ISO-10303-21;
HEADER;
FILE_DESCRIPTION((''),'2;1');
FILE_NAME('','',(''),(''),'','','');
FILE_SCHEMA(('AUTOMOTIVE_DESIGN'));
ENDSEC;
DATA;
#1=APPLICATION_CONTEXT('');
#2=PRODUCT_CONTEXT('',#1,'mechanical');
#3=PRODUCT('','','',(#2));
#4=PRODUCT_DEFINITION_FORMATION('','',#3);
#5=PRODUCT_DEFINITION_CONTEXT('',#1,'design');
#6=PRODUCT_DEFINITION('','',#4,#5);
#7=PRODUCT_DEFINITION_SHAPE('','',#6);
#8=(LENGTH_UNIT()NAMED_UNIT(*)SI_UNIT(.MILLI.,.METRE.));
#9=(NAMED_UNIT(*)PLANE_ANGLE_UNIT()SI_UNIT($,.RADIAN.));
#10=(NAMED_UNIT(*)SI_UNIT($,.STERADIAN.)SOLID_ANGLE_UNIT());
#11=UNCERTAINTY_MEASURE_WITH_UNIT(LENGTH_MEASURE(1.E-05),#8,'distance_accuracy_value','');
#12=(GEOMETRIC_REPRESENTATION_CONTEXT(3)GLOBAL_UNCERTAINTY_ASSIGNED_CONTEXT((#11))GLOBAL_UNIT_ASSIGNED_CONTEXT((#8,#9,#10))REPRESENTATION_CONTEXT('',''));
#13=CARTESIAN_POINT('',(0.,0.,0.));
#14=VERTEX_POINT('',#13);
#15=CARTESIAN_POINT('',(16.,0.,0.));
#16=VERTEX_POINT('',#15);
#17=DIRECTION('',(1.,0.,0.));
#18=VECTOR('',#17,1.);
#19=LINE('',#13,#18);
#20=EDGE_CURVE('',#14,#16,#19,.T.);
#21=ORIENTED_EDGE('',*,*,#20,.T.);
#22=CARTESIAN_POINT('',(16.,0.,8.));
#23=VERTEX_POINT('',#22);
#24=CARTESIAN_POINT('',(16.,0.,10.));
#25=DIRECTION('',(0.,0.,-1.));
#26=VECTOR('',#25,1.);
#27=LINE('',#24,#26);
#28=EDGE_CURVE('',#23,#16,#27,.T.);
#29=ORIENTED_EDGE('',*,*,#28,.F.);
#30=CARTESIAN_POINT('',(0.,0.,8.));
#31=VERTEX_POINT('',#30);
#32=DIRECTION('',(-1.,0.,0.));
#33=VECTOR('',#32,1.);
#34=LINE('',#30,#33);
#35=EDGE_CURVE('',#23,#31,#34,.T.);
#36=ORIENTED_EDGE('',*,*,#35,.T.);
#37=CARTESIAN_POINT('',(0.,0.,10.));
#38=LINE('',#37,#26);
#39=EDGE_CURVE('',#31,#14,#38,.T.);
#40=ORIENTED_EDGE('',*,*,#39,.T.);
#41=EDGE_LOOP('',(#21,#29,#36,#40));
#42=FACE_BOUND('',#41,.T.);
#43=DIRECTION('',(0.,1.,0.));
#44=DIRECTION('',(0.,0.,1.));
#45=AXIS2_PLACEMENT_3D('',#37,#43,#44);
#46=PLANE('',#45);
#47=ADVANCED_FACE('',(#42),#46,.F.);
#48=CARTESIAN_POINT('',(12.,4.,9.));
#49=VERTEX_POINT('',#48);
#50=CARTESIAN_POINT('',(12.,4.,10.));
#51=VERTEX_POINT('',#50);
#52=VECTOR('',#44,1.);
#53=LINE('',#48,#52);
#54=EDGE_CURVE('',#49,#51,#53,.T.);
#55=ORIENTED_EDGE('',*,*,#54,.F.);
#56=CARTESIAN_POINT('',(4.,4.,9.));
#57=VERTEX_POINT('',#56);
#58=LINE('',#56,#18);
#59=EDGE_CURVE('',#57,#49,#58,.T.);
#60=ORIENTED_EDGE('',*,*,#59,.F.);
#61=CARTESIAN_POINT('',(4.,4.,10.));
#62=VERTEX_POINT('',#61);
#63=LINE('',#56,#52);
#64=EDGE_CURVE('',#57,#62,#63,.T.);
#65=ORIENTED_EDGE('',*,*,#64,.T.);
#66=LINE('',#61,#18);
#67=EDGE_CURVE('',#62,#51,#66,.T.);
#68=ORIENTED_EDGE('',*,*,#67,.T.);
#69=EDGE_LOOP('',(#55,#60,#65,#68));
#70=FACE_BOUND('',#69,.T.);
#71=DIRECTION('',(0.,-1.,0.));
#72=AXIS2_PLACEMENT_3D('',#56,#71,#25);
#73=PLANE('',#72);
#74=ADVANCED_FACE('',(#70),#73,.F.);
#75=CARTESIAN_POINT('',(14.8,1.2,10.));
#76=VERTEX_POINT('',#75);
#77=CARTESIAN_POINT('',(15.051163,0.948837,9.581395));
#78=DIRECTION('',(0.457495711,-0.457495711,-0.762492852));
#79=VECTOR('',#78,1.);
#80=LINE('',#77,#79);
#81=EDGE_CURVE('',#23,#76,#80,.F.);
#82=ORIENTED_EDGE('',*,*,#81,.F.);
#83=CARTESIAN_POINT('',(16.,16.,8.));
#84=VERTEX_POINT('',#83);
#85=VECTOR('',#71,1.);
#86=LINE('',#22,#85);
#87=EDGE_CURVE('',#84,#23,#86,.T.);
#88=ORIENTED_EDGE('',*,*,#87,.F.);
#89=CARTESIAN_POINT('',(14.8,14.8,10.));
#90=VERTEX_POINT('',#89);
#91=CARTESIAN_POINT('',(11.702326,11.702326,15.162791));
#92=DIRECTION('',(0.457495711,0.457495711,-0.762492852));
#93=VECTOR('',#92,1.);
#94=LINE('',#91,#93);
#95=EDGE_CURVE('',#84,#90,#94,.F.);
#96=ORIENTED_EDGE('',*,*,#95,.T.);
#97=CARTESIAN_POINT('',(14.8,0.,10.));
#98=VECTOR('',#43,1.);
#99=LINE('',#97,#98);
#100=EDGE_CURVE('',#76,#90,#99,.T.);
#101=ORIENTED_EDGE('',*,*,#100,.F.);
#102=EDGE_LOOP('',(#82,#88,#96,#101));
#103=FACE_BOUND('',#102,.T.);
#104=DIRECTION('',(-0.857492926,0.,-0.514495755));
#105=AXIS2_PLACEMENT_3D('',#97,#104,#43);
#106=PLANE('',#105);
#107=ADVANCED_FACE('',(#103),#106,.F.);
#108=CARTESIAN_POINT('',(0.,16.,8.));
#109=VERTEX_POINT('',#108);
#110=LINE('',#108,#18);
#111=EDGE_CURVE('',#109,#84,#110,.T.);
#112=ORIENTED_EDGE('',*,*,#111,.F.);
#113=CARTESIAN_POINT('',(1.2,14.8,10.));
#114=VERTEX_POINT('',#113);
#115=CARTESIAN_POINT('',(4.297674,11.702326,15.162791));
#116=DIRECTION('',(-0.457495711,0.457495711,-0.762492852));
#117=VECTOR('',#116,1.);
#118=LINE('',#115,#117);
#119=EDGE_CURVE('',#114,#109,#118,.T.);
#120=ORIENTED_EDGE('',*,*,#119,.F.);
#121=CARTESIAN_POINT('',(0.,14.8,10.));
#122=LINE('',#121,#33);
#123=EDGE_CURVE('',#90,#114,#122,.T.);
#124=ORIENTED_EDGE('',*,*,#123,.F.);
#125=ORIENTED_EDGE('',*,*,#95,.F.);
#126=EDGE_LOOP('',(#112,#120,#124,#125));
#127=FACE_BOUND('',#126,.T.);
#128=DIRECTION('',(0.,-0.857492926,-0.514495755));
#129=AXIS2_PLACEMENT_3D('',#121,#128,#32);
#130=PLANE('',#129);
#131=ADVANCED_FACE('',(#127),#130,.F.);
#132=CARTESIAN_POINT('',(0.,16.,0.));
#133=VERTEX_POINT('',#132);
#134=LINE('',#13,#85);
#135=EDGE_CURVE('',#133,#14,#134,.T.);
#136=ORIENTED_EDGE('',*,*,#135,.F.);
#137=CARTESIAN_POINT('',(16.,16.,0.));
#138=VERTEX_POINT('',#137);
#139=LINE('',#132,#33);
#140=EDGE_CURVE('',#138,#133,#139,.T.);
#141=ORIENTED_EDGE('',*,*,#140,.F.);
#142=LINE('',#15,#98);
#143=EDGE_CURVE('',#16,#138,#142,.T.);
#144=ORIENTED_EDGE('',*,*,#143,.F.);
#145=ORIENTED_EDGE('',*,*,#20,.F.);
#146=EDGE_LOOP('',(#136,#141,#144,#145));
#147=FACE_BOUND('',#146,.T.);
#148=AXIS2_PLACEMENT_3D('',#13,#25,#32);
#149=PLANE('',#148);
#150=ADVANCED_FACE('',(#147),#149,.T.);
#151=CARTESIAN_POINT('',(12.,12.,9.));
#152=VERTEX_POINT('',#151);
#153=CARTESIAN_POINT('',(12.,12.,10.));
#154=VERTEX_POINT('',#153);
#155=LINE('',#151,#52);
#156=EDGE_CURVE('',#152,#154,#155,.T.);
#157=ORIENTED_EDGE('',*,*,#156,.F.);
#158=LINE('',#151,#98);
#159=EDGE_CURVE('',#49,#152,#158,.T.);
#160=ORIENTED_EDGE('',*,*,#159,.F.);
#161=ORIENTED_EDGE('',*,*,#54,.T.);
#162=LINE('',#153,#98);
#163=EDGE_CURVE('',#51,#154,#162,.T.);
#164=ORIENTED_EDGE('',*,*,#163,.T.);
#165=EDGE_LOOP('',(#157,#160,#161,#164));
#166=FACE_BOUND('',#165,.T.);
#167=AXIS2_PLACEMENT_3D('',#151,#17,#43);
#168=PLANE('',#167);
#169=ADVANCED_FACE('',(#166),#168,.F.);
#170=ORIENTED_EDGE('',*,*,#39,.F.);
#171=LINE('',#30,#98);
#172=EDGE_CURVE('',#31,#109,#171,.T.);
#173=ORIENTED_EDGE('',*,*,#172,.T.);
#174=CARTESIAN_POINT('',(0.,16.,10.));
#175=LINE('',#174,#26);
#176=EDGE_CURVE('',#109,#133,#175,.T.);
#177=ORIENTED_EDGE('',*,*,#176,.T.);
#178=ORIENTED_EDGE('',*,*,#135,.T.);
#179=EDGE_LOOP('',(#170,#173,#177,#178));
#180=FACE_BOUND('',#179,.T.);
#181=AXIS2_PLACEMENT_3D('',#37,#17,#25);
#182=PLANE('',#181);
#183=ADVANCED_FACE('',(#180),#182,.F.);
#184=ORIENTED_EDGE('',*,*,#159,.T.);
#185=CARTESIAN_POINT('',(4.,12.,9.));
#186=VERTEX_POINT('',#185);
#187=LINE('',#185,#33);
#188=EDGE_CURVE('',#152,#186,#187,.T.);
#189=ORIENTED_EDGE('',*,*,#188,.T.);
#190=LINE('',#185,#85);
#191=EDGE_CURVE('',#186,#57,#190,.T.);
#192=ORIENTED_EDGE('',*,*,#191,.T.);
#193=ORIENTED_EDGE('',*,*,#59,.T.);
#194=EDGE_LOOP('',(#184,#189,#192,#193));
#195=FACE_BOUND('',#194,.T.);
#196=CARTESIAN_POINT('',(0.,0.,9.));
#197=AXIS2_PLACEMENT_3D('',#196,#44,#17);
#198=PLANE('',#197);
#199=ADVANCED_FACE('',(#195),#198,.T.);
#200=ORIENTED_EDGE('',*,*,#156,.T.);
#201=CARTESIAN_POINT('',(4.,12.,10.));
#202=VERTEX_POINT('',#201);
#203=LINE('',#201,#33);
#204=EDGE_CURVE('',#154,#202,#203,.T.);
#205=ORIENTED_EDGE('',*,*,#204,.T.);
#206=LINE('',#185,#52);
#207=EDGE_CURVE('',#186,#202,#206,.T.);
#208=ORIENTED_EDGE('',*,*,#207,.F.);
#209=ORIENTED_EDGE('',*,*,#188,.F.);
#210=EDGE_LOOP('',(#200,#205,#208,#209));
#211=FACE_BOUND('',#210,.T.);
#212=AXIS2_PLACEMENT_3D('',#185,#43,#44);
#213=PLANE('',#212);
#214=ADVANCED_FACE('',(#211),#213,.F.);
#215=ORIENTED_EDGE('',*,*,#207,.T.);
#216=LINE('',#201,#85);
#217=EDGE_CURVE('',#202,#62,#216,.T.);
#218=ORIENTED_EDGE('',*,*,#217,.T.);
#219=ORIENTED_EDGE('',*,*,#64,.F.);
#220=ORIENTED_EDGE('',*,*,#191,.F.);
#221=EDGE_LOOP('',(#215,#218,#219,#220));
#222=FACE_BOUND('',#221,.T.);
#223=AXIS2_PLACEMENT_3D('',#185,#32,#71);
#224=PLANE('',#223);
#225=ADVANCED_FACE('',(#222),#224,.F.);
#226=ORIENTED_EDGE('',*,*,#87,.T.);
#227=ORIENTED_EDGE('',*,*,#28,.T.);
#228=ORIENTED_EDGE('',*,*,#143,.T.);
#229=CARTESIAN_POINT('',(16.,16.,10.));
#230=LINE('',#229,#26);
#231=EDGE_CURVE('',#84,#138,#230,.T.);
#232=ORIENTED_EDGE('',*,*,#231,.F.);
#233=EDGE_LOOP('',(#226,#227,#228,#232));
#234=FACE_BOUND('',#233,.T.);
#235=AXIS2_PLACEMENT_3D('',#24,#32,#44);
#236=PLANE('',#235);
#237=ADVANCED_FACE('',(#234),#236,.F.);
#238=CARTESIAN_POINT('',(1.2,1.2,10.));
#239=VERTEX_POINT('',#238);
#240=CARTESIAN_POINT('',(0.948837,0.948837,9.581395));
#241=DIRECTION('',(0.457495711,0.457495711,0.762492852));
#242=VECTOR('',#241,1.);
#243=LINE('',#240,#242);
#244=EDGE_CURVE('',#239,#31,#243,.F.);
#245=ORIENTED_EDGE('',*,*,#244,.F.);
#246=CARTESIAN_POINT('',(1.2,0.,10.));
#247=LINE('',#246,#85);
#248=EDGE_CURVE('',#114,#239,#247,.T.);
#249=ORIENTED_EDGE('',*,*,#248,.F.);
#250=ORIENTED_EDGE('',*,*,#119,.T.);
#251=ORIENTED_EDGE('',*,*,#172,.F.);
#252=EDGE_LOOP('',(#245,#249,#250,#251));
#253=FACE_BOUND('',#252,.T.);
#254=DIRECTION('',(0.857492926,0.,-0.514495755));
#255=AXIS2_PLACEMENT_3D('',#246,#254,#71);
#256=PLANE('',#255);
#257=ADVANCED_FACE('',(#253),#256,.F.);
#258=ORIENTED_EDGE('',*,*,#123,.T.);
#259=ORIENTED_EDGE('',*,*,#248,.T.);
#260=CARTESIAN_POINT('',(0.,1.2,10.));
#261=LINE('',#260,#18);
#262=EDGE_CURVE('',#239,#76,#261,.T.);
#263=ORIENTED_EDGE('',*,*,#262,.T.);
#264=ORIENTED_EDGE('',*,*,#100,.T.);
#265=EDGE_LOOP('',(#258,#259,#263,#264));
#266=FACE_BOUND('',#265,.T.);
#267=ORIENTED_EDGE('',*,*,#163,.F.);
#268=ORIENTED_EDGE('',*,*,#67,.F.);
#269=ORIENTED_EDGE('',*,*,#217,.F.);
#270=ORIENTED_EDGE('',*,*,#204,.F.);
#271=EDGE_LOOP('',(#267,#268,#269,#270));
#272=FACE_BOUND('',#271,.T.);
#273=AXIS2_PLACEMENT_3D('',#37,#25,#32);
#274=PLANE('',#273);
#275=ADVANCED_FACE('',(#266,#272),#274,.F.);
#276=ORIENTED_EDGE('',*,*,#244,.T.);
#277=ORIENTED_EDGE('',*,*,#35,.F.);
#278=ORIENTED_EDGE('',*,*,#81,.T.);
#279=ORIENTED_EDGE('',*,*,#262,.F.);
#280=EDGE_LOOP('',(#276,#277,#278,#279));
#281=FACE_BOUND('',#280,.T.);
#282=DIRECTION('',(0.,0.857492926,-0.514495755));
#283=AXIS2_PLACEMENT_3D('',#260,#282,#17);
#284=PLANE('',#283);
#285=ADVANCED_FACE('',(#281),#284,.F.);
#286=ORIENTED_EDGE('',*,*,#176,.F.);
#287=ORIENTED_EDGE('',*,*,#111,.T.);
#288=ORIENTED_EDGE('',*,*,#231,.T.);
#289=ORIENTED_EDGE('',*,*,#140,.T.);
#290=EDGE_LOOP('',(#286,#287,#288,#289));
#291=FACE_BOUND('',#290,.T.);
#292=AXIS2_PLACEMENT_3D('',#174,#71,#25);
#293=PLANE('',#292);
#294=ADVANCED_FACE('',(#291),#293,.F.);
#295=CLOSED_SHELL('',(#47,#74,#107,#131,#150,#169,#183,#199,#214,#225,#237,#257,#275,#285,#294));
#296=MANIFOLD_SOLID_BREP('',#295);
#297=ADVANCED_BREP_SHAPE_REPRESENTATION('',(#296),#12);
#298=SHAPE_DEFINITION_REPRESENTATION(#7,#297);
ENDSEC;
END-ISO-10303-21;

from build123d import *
from OCP.BRepFilletAPI import BRepFilletAPI_MakeChamfer

# Parameters (mm, degrees)
SKETCH1_W           = 16
SKETCH1_H           = 16
BOSS_EXTRUDE1_DEPTH = 10
SKETCH2_W           = 8
SKETCH2_H           = 8
CUT_EXTRUDE1_DEPTH  = 1
FILLET4_SIZE        = 2
FILLET4_SIZE2       = 1.2


with BuildPart() as part:
    # Sketch1 → Boss-Extrude1 (new body)
    with BuildSketch(Plane.XY):
        with Locations((8, 8)):
            Rectangle(SKETCH1_W, SKETCH1_H)
    extrude(amount=BOSS_EXTRUDE1_DEPTH)

    # Sketch2 → Cut-Extrude1 (cut)
    with BuildSketch(Plane.XY.offset(10)):
        with Locations((8, 8)):
            Rectangle(SKETCH2_W, SKETCH2_H)
    extrude(amount=-CUT_EXTRUDE1_DEPTH, mode=Mode.SUBTRACT)

    # Fillet4: one chamfer whose edges measure the first distance from different faces: ONE call of the kernel's chamfer builder (chamfer() names one face for all edges)
    fillet4_edges_1 = [part.edges().sort_by_distance(p)[0] for p in [
        (16, 8, 10),
    ]]
    fillet4_side_1 = [part.faces().sort_by_distance(p)[0] for p in [
        (16, 8, 5),
    ]]
    fillet4_edges_2 = [part.edges().sort_by_distance(p)[0] for p in [
        (8, 16, 10),
    ]]
    fillet4_side_2 = [part.faces().sort_by_distance(p)[0] for p in [
        (8, 16, 5),
    ]]
    fillet4_edges_3 = [part.edges().sort_by_distance(p)[0] for p in [
        (0, 8, 10),
    ]]
    fillet4_side_3 = [part.faces().sort_by_distance(p)[0] for p in [
        (0, 8, 5),
    ]]
    fillet4_edges_4 = [part.edges().sort_by_distance(p)[0] for p in [
        (8, 0, 10),
    ]]
    fillet4_side_4 = [part.faces().sort_by_distance(p)[0] for p in [
        (8, 0, 5),
    ]]
    fillet4 = BRepFilletAPI_MakeChamfer(part.part.solid().wrapped)
    for e in fillet4_edges_1:
        fillet4.Add(FILLET4_SIZE, FILLET4_SIZE2, e.wrapped, fillet4_side_1[0].wrapped)  # the first distance lies on this face
    for e in fillet4_edges_2:
        fillet4.Add(FILLET4_SIZE, FILLET4_SIZE2, e.wrapped, fillet4_side_2[0].wrapped)  # the first distance lies on this face
    for e in fillet4_edges_3:
        fillet4.Add(FILLET4_SIZE, FILLET4_SIZE2, e.wrapped, fillet4_side_3[0].wrapped)  # the first distance lies on this face
    for e in fillet4_edges_4:
        fillet4.Add(FILLET4_SIZE, FILLET4_SIZE2, e.wrapped, fillet4_side_4[0].wrapped)  # the first distance lies on this face
    add(Compound.cast(fillet4.Shape()), mode=Mode.REPLACE)


solid = part.part
